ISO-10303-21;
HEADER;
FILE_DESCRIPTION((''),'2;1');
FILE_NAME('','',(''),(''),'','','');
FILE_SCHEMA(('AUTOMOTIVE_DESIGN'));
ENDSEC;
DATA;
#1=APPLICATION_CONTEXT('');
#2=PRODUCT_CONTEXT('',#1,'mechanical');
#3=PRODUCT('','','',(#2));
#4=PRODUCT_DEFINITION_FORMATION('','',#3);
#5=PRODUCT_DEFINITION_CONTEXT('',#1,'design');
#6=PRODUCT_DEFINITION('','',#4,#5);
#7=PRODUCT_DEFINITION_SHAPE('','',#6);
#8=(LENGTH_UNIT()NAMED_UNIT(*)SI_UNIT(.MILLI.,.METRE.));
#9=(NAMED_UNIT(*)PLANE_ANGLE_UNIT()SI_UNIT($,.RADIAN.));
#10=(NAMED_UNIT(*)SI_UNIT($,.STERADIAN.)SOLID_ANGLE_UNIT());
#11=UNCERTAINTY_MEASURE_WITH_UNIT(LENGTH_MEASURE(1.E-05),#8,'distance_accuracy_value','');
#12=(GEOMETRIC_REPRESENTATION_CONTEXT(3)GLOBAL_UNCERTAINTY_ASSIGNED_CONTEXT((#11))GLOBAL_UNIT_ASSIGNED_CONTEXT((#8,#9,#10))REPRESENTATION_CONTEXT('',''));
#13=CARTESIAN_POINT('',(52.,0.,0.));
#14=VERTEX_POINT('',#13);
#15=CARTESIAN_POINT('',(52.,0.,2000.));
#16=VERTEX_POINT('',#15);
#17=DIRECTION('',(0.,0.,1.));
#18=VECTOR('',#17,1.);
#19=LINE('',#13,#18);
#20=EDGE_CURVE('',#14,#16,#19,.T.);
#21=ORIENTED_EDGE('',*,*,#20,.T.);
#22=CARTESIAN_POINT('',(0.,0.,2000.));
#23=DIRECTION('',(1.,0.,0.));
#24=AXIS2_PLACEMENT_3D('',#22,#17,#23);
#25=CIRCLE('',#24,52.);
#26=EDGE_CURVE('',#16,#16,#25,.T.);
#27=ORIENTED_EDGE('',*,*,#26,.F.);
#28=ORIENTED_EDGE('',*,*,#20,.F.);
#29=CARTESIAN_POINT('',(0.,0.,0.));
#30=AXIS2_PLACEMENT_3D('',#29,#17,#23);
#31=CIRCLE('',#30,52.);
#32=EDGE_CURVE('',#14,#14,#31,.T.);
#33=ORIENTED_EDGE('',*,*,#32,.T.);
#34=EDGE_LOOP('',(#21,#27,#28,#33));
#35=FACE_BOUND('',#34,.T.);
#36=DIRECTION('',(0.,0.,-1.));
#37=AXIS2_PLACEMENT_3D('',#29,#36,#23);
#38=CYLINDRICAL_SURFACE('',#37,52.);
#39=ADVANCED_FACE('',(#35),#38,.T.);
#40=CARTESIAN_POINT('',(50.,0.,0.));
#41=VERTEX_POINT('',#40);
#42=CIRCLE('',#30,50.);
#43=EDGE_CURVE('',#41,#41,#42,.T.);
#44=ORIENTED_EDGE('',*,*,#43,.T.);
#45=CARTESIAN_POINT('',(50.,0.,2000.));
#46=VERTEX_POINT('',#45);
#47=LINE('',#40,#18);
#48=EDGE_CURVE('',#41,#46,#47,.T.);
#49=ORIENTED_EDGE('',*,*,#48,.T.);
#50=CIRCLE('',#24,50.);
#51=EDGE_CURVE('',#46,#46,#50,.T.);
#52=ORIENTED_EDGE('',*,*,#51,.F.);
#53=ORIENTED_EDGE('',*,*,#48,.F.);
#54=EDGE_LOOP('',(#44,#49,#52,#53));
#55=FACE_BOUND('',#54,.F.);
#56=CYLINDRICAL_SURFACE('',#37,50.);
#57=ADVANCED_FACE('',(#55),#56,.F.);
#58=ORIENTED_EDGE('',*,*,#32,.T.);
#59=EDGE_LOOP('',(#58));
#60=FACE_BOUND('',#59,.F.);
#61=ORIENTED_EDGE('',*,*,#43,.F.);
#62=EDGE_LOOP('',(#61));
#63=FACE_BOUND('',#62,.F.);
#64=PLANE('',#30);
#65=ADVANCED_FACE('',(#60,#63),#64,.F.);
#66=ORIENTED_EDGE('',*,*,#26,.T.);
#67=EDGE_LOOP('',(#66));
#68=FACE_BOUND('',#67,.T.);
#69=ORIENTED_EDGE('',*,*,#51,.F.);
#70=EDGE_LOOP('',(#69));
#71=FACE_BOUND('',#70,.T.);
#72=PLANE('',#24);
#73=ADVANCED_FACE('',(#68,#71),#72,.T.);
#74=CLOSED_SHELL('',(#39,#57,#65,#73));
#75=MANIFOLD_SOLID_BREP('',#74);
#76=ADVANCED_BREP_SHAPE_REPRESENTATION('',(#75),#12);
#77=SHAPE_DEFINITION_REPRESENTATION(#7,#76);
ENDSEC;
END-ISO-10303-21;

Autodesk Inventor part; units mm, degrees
ref_plane "XZ Plane" through (0, 0, 0) normal (0, 1, 0) x (-1, 0, 0)
ref_plane "XY Plane" through (0, 0, 0) normal (0, 0, 1) x (1, 0, 0)
sketch "Schizzo1" plane through (0, 0, 0) normal (0, 0, 1) x (1, 0, 0)
  circle A0 centre (0, 0) radius 52
  circle A1 centre (0, 0) radius 50
  dimension "d0" = 104
  dimension "d1" = 100
extrude "Estrusione1" add sketch "Schizzo1" along normal blind 2000
properties part number "Tubo"
